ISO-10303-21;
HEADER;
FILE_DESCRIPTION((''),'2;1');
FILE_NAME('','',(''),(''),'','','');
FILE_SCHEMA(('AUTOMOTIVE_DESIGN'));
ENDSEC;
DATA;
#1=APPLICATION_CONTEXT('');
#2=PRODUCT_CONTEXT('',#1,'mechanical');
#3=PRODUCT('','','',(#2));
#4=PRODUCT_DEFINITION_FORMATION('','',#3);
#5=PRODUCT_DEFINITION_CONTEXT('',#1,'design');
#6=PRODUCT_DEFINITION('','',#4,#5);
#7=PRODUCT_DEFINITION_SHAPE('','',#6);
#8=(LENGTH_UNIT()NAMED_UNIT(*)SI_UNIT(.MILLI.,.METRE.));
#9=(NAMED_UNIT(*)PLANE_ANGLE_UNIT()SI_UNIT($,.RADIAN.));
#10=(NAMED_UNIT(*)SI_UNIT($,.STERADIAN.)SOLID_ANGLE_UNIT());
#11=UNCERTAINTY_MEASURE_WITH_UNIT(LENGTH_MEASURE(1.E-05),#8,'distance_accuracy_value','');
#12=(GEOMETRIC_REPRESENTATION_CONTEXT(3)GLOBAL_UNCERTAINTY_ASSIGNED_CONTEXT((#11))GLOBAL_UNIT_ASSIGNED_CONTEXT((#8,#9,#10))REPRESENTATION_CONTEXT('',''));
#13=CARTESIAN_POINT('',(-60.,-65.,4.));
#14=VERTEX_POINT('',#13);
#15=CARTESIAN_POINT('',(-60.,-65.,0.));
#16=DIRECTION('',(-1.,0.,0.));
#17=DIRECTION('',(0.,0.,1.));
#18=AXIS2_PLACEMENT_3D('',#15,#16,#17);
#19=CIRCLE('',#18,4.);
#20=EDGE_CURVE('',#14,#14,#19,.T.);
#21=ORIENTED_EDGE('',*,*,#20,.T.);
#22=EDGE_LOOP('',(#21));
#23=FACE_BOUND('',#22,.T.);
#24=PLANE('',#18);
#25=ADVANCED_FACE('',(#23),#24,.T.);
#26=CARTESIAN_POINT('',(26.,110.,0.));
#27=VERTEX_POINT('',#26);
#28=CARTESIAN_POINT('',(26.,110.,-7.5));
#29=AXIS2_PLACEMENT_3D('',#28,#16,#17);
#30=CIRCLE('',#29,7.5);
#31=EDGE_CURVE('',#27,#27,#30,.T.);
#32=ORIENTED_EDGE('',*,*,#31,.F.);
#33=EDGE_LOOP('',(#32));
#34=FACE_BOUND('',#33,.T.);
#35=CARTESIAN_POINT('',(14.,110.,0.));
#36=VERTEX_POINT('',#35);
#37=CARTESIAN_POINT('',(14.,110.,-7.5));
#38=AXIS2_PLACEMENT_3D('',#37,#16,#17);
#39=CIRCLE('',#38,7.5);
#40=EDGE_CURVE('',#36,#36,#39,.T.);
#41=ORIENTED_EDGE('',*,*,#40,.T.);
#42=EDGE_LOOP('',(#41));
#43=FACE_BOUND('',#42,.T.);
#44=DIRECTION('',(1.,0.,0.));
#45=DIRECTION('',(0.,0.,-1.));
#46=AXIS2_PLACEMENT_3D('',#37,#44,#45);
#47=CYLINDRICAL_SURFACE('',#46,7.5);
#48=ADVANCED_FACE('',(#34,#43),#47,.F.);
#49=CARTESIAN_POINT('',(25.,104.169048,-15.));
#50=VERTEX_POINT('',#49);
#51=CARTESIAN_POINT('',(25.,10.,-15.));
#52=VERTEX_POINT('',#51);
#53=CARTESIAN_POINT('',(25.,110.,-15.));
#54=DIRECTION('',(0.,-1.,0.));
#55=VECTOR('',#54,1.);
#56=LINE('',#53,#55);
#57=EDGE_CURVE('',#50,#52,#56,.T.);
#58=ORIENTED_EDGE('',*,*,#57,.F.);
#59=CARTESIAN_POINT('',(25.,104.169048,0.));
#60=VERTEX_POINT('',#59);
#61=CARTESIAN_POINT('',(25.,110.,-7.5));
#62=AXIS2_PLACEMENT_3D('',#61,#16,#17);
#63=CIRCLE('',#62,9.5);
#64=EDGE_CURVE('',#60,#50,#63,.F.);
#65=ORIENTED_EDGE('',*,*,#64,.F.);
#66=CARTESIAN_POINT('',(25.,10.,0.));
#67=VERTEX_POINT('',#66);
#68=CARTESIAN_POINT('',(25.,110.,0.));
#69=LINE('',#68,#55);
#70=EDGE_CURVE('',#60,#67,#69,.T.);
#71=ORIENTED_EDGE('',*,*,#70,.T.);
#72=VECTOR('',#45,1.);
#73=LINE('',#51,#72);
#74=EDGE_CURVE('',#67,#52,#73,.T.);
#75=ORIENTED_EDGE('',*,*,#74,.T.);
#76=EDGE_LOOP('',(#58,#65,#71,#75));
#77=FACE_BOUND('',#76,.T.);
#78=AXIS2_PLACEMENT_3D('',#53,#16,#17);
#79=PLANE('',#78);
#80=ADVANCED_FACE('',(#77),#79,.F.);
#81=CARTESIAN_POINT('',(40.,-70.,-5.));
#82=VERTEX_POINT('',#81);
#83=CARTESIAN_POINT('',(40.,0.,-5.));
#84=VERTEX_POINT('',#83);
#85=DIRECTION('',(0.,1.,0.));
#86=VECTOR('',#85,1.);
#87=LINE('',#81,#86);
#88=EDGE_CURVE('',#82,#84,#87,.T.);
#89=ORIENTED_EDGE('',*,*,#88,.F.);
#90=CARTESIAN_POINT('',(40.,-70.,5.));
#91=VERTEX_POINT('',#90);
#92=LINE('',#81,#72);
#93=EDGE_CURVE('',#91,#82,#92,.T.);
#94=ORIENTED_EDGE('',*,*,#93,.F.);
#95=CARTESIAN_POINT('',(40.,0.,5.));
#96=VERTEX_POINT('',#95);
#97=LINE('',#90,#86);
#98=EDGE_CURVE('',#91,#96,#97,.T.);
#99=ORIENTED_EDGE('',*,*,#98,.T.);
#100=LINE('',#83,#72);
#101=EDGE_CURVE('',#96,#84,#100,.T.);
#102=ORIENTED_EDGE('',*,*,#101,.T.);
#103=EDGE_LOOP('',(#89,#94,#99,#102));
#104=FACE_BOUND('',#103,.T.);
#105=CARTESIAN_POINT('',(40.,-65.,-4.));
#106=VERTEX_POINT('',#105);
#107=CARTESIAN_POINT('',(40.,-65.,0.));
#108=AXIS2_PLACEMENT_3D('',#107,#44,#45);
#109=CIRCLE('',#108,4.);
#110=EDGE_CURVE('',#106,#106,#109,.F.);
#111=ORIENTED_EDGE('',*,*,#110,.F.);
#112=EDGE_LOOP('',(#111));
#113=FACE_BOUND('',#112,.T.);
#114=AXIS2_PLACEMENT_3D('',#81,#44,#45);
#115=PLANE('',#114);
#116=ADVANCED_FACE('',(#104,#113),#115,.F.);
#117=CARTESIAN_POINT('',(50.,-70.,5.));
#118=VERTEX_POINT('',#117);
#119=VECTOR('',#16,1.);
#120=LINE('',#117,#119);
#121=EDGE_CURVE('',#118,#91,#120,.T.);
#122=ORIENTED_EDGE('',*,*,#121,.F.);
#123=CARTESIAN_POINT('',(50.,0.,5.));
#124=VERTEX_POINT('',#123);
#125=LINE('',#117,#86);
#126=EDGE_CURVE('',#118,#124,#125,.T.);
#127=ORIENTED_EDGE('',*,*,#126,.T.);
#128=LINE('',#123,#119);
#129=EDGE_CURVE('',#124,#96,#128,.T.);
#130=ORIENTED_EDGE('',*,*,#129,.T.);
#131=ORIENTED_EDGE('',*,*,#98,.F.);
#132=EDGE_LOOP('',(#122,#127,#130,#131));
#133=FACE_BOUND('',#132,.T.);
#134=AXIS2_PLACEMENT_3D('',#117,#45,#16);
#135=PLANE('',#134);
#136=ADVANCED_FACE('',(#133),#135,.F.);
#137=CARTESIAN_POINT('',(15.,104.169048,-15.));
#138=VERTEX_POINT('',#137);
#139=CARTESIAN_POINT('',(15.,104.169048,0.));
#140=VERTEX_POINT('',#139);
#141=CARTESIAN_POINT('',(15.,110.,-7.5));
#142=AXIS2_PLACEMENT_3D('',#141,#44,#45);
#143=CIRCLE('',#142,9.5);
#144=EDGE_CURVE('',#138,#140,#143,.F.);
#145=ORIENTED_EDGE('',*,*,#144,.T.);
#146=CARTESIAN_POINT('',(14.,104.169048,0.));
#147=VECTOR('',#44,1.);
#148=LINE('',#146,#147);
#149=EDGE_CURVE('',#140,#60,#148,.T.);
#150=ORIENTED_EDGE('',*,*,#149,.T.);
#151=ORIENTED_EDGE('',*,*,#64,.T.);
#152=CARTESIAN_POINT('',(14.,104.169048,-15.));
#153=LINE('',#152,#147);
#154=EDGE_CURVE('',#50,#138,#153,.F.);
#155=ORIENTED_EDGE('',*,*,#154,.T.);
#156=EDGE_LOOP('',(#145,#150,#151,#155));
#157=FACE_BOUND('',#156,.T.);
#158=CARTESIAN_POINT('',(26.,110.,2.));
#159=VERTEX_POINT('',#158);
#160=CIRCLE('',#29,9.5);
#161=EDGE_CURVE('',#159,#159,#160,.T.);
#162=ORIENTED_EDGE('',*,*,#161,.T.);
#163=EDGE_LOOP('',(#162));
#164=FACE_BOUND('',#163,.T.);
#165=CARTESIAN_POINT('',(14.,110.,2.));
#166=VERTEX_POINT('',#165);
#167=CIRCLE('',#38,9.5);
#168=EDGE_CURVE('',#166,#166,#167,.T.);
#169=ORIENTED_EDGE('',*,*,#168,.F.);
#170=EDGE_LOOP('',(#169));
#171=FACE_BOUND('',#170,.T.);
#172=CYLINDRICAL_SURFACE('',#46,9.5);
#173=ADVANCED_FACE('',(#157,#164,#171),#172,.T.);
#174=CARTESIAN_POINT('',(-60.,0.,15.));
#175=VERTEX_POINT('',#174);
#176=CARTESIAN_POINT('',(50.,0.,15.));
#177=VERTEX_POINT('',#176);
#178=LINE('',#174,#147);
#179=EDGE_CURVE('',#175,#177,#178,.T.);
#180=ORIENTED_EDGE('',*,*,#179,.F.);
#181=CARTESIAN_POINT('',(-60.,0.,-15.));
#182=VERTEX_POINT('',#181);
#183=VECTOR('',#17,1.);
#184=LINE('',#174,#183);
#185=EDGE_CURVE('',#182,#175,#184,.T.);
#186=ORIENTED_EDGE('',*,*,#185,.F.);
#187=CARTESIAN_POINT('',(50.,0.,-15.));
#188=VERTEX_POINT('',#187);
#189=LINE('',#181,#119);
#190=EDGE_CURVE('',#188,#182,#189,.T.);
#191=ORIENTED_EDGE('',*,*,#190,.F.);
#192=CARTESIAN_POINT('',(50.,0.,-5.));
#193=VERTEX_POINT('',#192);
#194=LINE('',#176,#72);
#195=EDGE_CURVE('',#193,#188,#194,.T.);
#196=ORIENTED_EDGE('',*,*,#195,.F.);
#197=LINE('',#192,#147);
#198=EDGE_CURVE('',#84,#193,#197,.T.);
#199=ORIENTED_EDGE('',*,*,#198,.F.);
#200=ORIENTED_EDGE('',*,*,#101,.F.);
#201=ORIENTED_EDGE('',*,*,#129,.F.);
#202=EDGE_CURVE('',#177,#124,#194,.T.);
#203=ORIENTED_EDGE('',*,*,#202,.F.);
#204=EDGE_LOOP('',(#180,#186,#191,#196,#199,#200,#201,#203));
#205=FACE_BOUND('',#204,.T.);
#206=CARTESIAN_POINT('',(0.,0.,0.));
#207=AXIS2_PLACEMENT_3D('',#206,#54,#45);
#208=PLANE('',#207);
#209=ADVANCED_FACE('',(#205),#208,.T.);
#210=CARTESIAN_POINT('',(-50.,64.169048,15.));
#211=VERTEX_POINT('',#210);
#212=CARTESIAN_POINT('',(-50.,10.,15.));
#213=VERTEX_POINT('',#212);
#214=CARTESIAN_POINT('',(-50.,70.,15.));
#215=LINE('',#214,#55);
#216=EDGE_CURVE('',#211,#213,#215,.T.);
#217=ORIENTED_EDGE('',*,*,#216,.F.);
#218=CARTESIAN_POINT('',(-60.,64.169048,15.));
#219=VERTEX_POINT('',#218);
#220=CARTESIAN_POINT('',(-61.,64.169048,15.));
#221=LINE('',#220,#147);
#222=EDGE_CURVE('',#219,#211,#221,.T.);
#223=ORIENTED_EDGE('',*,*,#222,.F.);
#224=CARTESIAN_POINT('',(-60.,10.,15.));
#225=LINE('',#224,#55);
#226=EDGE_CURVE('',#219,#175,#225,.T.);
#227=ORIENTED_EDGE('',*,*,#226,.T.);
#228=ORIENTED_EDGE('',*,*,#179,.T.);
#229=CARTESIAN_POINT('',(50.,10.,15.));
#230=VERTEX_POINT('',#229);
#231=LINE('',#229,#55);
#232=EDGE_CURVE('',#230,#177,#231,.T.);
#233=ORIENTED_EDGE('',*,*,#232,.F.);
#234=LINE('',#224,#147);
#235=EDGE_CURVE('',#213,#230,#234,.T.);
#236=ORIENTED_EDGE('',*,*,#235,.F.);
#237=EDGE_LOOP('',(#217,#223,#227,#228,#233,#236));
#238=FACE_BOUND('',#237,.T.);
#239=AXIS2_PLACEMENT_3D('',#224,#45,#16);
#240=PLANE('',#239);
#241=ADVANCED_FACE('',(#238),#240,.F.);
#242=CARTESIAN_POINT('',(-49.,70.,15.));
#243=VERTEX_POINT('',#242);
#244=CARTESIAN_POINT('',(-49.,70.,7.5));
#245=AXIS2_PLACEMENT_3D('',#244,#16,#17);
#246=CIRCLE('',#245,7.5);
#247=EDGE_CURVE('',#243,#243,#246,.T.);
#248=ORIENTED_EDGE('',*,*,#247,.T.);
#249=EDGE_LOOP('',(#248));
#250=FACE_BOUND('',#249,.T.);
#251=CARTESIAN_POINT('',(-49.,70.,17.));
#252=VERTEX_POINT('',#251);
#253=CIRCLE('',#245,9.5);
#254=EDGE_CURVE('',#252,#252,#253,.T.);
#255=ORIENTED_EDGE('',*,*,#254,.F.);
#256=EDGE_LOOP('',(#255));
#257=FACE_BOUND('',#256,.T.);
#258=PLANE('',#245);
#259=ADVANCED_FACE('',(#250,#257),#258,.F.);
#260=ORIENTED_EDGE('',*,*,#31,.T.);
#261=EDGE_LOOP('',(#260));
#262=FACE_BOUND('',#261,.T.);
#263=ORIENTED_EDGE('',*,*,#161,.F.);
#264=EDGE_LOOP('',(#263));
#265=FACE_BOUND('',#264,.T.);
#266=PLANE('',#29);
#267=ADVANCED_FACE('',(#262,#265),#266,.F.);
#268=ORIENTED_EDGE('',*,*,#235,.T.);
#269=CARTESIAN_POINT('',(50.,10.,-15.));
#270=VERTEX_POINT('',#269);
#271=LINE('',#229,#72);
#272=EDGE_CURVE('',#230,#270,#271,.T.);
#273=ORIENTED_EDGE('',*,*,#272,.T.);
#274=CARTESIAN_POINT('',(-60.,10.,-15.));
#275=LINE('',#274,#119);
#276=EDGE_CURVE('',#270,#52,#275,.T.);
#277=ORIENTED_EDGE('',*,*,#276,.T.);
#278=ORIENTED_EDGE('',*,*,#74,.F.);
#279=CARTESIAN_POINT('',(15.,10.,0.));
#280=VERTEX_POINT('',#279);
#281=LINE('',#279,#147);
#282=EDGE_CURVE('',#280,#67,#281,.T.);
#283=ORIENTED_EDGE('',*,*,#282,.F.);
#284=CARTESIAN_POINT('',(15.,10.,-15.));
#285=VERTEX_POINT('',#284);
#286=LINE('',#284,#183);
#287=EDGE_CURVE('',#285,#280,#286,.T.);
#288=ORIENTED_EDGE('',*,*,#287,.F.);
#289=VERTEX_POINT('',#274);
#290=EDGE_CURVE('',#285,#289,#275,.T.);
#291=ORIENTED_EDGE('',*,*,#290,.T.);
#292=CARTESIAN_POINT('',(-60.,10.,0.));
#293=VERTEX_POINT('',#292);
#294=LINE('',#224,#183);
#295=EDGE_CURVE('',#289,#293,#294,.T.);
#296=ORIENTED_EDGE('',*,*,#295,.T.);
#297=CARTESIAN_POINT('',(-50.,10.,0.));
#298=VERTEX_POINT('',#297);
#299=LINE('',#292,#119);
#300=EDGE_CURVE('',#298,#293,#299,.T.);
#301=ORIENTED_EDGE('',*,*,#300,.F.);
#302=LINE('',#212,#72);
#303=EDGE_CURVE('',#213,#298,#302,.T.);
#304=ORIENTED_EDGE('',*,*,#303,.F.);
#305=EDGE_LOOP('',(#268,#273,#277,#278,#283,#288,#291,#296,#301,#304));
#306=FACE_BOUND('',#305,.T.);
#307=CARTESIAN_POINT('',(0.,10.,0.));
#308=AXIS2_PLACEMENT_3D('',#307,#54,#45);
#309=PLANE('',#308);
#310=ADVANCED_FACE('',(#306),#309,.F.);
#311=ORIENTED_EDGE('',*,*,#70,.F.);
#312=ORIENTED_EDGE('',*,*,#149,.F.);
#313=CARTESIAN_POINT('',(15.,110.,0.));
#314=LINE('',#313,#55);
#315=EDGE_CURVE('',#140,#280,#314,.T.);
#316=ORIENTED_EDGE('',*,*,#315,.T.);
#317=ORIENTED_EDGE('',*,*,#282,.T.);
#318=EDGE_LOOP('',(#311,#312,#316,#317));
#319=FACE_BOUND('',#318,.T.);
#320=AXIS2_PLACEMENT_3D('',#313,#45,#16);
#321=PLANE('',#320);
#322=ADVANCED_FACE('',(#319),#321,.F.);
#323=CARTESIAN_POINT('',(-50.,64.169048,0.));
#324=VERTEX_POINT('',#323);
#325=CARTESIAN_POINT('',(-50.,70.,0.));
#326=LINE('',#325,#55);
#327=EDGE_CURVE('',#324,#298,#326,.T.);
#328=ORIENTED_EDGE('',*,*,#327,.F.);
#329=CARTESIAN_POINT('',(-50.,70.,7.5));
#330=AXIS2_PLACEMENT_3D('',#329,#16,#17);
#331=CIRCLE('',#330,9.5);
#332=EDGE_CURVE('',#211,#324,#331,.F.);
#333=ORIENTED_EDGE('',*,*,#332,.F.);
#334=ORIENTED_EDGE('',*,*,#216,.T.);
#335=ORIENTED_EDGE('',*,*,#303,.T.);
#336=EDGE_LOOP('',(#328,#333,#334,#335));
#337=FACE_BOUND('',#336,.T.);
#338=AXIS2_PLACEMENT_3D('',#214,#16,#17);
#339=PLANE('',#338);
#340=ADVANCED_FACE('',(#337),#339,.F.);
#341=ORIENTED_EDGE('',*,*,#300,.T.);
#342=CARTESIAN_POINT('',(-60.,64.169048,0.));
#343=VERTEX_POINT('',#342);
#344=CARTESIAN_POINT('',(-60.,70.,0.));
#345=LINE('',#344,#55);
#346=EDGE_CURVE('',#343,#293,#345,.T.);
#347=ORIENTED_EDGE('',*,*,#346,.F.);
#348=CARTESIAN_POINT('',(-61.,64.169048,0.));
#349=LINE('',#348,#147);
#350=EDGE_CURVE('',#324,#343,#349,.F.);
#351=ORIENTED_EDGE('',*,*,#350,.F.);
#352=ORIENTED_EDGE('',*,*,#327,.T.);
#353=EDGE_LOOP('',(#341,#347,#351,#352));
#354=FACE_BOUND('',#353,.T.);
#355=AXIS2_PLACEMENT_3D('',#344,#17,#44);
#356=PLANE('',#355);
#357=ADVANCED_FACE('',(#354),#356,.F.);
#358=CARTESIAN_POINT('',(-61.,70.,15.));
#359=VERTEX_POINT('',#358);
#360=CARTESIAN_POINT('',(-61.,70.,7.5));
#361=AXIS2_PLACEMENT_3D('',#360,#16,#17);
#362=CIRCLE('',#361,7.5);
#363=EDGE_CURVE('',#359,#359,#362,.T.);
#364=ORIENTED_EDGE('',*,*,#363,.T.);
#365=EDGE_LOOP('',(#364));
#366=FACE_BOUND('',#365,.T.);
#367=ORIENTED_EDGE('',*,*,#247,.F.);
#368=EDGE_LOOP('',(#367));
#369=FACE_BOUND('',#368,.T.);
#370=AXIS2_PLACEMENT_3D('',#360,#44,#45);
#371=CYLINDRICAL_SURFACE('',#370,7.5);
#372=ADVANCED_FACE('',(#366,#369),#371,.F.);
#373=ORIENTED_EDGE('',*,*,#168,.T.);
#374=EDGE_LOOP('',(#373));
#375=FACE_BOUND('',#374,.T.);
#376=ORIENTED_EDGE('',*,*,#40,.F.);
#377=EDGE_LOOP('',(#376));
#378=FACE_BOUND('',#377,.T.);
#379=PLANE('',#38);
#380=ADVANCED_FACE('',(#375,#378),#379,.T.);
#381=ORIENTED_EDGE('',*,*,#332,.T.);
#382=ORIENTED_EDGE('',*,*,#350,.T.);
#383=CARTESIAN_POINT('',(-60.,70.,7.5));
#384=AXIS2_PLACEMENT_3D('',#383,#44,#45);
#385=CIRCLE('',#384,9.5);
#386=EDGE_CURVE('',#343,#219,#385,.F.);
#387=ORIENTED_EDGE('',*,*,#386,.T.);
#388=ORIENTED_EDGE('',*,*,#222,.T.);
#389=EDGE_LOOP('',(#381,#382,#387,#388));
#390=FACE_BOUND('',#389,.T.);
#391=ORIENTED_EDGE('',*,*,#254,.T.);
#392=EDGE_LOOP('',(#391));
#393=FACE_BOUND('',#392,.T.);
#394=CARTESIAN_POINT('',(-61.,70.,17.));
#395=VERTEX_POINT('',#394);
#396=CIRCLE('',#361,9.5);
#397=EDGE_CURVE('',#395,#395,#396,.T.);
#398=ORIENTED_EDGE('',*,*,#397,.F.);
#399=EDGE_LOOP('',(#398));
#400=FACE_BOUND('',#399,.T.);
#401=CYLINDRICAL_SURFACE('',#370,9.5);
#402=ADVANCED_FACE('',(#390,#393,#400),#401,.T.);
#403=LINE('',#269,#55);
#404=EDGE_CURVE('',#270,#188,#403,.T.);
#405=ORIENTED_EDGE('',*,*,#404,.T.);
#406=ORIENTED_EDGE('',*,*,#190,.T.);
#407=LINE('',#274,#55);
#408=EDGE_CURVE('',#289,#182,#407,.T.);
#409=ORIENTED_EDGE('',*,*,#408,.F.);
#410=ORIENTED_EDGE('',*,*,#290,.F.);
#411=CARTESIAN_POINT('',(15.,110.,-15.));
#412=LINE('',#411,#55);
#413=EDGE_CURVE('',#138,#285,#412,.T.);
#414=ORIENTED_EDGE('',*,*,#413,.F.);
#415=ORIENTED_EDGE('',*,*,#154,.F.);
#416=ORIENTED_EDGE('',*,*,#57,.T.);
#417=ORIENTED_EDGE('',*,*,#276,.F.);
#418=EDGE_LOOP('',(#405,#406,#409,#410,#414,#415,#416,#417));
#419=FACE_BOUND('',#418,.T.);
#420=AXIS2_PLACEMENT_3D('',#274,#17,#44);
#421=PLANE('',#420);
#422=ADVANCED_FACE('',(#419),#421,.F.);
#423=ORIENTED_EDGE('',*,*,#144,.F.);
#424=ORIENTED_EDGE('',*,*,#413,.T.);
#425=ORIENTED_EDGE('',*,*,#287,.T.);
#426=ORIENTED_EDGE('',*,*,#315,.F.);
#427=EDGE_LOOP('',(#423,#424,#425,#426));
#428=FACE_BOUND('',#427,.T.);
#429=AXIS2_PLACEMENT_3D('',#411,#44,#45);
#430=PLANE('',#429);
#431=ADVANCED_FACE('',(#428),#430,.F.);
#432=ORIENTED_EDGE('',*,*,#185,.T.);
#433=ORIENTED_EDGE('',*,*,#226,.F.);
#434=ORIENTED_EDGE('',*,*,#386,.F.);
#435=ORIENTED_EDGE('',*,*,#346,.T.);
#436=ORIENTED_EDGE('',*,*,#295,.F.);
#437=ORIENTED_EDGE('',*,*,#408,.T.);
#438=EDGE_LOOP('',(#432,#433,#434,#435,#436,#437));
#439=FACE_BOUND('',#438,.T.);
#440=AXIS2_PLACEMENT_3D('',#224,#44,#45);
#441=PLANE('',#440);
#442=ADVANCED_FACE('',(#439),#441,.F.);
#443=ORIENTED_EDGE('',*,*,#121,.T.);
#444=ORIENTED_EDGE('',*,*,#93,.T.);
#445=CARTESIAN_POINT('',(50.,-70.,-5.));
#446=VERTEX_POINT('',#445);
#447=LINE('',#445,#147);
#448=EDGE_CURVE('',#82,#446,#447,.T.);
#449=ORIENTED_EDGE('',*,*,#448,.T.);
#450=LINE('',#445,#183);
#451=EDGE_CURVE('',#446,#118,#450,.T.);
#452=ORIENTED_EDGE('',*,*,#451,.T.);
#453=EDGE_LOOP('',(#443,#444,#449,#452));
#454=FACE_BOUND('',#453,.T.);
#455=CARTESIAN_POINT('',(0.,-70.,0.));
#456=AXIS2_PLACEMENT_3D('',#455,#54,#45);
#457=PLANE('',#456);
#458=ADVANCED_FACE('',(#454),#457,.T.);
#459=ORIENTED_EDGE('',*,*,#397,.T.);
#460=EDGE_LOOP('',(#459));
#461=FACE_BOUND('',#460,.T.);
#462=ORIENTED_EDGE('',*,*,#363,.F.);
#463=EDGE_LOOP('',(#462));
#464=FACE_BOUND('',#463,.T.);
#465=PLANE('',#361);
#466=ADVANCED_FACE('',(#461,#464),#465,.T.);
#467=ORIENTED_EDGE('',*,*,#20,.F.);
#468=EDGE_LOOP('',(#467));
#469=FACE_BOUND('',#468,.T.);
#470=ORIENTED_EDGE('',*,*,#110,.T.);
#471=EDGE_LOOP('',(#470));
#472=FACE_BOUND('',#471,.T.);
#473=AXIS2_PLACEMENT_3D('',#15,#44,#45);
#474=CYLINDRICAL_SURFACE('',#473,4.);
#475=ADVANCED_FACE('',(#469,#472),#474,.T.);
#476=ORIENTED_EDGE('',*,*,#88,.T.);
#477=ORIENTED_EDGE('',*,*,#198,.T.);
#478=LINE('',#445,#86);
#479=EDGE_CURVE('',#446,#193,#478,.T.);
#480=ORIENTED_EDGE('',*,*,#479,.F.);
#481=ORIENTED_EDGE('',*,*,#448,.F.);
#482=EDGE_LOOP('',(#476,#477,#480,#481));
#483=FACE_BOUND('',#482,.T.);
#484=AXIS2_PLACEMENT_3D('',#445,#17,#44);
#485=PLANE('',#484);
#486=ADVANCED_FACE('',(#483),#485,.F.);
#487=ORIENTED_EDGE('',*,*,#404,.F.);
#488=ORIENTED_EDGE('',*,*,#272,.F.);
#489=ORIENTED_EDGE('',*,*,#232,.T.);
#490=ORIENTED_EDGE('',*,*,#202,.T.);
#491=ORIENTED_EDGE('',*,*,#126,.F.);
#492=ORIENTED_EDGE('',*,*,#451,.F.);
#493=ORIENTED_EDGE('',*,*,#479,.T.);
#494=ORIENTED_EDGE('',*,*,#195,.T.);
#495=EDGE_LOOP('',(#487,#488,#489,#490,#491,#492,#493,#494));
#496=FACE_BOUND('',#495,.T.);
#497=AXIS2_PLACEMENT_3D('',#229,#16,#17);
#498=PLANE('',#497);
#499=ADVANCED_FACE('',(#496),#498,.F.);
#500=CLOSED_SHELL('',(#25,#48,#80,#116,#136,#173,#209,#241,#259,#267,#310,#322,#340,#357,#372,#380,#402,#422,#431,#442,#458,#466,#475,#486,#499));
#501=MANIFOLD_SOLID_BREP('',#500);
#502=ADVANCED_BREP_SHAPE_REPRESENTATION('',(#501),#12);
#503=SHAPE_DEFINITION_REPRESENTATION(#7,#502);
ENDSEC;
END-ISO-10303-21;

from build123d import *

# Parameters (mm, degrees)
SKETCH2_W            = 110
SKETCH2_H            = 30
BOSS_EXTRUDE2_DEPTH  = 10
SKETCH15_W           = 10
SKETCH15_H           = 15
BOSS_EXTRUDE9_DEPTH  = 60
SKETCH17_R           = 9.5
SKETCH17_R_2         = 7.5
EXTRUDE_THIN3_DEPTH  = 6
CUT_EXTRUDE4_START   = -5
CUT_EXTRUDE4_DEPTH   = 10
SKETCH19_W           = 10
SKETCH19_H           = 15
BOSS_EXTRUDE11_DEPTH = 100
SKETCH20_R           = 9.5
SKETCH20_R_2         = 7.5
EXTRUDE_THIN4_DEPTH  = 6
CUT_EXTRUDE5_START   = -5
CUT_EXTRUDE5_DEPTH   = 10
SKETCH21_W           = 10
SKETCH21_H           = 10
BOSS_EXTRUDE12_DEPTH = 70
SKETCH22_R           = 4
BOSS_EXTRUDE13_DEPTH = 100


# Read off the part's stored shape, not the designer's step: Cut-Extrude4, Cut-Extrude5
with BuildPart() as part:
    # Sketch2 → Boss-Extrude2 (new body)
    with BuildSketch(Plane(origin=(0, 0, 0), x_dir=(1, 0, 0), z_dir=(0, 1, 0))):
        with Locations((-5, 0)):
            Rectangle(SKETCH2_W, SKETCH2_H)
    extrude(amount=BOSS_EXTRUDE2_DEPTH)

    # Sketch15 → Boss-Extrude9 (add)
    with BuildSketch(Plane(origin=(0, 10, 0), x_dir=(1, 0, 0), z_dir=(0, 1, 0))):
        with Locations((-55, -7.5)):
            Rectangle(SKETCH15_W, SKETCH15_H)
    extrude(amount=BOSS_EXTRUDE9_DEPTH)

    # Sketch17 → Extrude-Thin3 (add, symmetric)
    with BuildSketch(Plane.ZY.offset(55)):
        with Locations((7.5, 70)):
            Circle(SKETCH17_R)
        with Locations((7.5, 70)):
            Circle(SKETCH17_R_2, mode=Mode.SUBTRACT)
    extrude(amount=EXTRUDE_THIN3_DEPTH, both=True)

    # Cut-Extrude4 outline → Cut-Extrude4 (cut)
    with BuildSketch(Plane.ZY.offset(55).offset(CUT_EXTRUDE4_START)):
        with BuildLine():
            ThreePointArc((0, 70), (7.5, 62.5), (15, 70))
            Line((15, 70), (0, 70))
        make_face()
    extrude(amount=CUT_EXTRUDE4_DEPTH, mode=Mode.SUBTRACT)

    # Sketch19 → Boss-Extrude11 (add)
    with BuildSketch(Plane(origin=(0, 10, 0), x_dir=(1, 0, 0), z_dir=(0, 1, 0))):
        with Locations((20, 7.5)):
            Rectangle(SKETCH19_W, SKETCH19_H)
    extrude(amount=BOSS_EXTRUDE11_DEPTH)

    # Sketch20 → Extrude-Thin4 (add, symmetric)
    with BuildSketch(Plane.ZY.offset(-20)):
        with Locations((-7.5, 110)):
            Circle(SKETCH20_R)
        with Locations((-7.5, 110)):
            Circle(SKETCH20_R_2, mode=Mode.SUBTRACT)
    extrude(amount=EXTRUDE_THIN4_DEPTH, both=True)

    # Cut-Extrude5 outline → Cut-Extrude5 (cut)
    with BuildSketch(Plane.ZY.offset(-20).offset(CUT_EXTRUDE5_START)):
        with BuildLine():
            ThreePointArc((-15, 110), (-7.5, 102.5), (0, 110))
            Line((0, 110), (-15, 110))
        make_face()
    extrude(amount=CUT_EXTRUDE5_DEPTH, mode=Mode.SUBTRACT)

    # Sketch21 → Boss-Extrude12 (add)
    with BuildSketch(Plane.XZ):
        with Locations((45, 0)):
            Rectangle(SKETCH21_W, SKETCH21_H)
    extrude(amount=BOSS_EXTRUDE12_DEPTH)

    # Sketch22 → Boss-Extrude13 (add)
    with BuildSketch(Plane.ZY.offset(-40)):
        with Locations(Location((0, -65, 0), (0, 0, 180))):
            Circle(SKETCH22_R)
    extrude(amount=BOSS_EXTRUDE13_DEPTH)


solid = part.part
